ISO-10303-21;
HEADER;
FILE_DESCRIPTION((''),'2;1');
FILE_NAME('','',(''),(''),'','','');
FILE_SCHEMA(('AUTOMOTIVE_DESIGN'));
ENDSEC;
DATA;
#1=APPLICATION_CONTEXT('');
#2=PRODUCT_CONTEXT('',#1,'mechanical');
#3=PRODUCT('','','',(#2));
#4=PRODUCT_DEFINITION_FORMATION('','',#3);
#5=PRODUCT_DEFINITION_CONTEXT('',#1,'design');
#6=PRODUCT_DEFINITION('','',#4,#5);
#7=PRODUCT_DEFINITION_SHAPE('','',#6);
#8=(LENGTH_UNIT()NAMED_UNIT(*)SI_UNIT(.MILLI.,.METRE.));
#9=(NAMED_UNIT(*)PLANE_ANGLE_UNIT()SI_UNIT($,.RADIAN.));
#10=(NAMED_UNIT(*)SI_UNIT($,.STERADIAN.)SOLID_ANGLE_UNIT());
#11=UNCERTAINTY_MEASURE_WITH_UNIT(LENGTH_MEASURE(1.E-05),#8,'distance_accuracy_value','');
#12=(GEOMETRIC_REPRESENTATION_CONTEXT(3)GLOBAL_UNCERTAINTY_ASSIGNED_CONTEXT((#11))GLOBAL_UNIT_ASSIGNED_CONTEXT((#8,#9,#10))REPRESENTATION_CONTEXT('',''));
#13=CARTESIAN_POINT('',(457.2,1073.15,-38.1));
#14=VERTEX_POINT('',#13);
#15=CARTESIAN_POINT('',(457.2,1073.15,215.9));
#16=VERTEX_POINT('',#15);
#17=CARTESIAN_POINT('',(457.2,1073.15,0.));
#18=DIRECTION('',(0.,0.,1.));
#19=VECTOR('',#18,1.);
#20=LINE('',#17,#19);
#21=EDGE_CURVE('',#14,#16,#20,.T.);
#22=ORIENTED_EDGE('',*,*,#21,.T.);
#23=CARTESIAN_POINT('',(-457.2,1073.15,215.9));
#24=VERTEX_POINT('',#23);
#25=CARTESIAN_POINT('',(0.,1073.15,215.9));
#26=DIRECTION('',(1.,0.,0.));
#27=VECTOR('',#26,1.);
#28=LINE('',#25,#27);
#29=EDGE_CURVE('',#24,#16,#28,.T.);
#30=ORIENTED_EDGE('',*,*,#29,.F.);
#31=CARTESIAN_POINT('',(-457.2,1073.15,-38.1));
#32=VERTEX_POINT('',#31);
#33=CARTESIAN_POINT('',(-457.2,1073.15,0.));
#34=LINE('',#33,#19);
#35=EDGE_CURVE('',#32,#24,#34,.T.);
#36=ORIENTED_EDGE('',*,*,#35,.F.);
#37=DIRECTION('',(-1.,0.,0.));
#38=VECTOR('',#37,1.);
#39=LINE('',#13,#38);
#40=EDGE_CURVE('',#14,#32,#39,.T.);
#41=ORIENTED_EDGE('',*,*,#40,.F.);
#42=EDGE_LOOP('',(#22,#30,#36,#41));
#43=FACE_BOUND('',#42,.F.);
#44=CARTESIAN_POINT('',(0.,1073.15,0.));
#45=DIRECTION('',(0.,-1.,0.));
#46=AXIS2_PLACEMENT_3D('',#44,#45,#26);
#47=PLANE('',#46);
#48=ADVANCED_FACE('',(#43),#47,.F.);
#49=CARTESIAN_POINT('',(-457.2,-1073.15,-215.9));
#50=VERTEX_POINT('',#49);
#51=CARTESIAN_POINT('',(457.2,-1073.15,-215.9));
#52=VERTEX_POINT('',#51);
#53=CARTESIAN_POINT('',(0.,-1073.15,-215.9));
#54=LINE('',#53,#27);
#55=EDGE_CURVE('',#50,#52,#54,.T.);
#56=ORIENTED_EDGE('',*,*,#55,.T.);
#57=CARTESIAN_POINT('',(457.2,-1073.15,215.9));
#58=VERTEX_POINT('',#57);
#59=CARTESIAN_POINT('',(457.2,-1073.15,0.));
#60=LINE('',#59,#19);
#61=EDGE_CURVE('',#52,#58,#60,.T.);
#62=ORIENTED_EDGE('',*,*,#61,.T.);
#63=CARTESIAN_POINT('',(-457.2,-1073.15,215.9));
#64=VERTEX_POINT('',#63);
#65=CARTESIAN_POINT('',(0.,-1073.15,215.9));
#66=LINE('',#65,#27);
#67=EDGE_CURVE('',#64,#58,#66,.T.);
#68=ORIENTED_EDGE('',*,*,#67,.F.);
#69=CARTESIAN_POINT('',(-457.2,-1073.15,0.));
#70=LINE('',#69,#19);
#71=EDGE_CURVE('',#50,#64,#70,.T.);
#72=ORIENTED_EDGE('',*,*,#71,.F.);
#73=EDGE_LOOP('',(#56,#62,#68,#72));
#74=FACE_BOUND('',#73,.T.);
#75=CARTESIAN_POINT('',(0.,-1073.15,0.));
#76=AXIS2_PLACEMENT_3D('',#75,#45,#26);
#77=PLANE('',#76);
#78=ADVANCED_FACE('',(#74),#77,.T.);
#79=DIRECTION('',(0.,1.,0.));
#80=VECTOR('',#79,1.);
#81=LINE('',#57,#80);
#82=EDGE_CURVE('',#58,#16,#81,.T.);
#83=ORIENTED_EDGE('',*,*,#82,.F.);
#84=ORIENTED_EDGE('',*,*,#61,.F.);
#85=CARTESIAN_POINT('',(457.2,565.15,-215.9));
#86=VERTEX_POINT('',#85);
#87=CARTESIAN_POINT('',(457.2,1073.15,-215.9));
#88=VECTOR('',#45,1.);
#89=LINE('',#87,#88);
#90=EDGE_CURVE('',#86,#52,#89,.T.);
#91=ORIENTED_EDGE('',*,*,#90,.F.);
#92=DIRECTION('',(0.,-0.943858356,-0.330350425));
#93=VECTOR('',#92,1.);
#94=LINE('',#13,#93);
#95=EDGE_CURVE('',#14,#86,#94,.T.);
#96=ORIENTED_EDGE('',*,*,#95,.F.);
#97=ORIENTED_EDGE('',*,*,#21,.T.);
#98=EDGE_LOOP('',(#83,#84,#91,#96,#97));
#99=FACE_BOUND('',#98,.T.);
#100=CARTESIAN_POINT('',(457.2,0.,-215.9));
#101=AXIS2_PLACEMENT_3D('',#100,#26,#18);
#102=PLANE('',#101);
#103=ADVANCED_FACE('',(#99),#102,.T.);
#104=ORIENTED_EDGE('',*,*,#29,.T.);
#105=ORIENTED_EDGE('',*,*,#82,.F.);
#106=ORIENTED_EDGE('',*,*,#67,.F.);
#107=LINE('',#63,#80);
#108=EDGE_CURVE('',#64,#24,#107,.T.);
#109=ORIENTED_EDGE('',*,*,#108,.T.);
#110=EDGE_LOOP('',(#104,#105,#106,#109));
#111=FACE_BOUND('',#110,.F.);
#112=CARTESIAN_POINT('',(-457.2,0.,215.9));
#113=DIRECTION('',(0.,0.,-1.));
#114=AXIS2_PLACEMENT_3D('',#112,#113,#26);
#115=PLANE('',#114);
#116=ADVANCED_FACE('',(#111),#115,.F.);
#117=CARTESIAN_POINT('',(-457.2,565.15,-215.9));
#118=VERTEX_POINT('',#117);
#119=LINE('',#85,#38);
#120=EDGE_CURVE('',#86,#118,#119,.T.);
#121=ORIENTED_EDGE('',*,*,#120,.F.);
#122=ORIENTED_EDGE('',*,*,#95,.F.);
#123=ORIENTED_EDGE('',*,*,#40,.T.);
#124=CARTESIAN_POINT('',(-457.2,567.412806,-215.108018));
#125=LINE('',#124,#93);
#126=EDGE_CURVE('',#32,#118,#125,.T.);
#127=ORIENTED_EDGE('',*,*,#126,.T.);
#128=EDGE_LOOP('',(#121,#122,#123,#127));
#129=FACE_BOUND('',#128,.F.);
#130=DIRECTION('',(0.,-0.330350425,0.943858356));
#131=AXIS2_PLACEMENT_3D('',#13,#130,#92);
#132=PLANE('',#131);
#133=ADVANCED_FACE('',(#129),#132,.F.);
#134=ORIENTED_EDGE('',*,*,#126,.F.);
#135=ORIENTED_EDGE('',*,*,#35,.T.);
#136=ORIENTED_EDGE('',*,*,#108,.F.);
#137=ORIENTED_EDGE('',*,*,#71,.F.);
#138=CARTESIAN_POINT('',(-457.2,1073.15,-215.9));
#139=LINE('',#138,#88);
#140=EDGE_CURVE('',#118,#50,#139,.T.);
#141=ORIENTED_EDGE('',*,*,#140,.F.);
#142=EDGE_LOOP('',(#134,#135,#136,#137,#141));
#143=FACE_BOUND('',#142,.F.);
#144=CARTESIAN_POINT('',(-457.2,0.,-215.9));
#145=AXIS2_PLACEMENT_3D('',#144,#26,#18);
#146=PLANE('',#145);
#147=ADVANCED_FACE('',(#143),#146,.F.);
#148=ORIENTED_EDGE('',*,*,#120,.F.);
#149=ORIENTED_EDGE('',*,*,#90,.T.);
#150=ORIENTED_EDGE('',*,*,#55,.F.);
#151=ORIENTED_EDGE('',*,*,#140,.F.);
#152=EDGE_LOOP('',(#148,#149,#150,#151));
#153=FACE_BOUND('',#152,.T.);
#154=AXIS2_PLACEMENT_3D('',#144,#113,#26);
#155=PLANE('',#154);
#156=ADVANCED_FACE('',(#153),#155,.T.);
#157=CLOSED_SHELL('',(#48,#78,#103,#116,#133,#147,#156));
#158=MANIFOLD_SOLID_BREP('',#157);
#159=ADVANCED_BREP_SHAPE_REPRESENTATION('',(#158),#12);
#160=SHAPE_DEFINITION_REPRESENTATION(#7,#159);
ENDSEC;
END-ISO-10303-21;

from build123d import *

# Parameters (mm, degrees)
F0_W     = 914.4
F0_H     = 431.8
F1_DEPTH = 1073.15
F3_DEPTH = 914.401


# Not quite as in the source:
# - a feature names something its author has since deleted; it is built from what else it names


with BuildPart() as f1:
    # F0 (on Front) → F1 (new body, symmetric)
    with BuildSketch(Plane.XZ):
        Rectangle(F0_W, F0_H)
    extrude(amount=F1_DEPTH, both=True)

    # F2 (on face) → F3 (cut, through all)
    with BuildSketch(Plane.YZ.offset(457.2)):
        Polygon((1073.15, -215.9), (1073.15, -38.1), (565.15, -215.9), align=None)
    extrude(amount=-F3_DEPTH, mode=Mode.SUBTRACT)


solid = f1.part
